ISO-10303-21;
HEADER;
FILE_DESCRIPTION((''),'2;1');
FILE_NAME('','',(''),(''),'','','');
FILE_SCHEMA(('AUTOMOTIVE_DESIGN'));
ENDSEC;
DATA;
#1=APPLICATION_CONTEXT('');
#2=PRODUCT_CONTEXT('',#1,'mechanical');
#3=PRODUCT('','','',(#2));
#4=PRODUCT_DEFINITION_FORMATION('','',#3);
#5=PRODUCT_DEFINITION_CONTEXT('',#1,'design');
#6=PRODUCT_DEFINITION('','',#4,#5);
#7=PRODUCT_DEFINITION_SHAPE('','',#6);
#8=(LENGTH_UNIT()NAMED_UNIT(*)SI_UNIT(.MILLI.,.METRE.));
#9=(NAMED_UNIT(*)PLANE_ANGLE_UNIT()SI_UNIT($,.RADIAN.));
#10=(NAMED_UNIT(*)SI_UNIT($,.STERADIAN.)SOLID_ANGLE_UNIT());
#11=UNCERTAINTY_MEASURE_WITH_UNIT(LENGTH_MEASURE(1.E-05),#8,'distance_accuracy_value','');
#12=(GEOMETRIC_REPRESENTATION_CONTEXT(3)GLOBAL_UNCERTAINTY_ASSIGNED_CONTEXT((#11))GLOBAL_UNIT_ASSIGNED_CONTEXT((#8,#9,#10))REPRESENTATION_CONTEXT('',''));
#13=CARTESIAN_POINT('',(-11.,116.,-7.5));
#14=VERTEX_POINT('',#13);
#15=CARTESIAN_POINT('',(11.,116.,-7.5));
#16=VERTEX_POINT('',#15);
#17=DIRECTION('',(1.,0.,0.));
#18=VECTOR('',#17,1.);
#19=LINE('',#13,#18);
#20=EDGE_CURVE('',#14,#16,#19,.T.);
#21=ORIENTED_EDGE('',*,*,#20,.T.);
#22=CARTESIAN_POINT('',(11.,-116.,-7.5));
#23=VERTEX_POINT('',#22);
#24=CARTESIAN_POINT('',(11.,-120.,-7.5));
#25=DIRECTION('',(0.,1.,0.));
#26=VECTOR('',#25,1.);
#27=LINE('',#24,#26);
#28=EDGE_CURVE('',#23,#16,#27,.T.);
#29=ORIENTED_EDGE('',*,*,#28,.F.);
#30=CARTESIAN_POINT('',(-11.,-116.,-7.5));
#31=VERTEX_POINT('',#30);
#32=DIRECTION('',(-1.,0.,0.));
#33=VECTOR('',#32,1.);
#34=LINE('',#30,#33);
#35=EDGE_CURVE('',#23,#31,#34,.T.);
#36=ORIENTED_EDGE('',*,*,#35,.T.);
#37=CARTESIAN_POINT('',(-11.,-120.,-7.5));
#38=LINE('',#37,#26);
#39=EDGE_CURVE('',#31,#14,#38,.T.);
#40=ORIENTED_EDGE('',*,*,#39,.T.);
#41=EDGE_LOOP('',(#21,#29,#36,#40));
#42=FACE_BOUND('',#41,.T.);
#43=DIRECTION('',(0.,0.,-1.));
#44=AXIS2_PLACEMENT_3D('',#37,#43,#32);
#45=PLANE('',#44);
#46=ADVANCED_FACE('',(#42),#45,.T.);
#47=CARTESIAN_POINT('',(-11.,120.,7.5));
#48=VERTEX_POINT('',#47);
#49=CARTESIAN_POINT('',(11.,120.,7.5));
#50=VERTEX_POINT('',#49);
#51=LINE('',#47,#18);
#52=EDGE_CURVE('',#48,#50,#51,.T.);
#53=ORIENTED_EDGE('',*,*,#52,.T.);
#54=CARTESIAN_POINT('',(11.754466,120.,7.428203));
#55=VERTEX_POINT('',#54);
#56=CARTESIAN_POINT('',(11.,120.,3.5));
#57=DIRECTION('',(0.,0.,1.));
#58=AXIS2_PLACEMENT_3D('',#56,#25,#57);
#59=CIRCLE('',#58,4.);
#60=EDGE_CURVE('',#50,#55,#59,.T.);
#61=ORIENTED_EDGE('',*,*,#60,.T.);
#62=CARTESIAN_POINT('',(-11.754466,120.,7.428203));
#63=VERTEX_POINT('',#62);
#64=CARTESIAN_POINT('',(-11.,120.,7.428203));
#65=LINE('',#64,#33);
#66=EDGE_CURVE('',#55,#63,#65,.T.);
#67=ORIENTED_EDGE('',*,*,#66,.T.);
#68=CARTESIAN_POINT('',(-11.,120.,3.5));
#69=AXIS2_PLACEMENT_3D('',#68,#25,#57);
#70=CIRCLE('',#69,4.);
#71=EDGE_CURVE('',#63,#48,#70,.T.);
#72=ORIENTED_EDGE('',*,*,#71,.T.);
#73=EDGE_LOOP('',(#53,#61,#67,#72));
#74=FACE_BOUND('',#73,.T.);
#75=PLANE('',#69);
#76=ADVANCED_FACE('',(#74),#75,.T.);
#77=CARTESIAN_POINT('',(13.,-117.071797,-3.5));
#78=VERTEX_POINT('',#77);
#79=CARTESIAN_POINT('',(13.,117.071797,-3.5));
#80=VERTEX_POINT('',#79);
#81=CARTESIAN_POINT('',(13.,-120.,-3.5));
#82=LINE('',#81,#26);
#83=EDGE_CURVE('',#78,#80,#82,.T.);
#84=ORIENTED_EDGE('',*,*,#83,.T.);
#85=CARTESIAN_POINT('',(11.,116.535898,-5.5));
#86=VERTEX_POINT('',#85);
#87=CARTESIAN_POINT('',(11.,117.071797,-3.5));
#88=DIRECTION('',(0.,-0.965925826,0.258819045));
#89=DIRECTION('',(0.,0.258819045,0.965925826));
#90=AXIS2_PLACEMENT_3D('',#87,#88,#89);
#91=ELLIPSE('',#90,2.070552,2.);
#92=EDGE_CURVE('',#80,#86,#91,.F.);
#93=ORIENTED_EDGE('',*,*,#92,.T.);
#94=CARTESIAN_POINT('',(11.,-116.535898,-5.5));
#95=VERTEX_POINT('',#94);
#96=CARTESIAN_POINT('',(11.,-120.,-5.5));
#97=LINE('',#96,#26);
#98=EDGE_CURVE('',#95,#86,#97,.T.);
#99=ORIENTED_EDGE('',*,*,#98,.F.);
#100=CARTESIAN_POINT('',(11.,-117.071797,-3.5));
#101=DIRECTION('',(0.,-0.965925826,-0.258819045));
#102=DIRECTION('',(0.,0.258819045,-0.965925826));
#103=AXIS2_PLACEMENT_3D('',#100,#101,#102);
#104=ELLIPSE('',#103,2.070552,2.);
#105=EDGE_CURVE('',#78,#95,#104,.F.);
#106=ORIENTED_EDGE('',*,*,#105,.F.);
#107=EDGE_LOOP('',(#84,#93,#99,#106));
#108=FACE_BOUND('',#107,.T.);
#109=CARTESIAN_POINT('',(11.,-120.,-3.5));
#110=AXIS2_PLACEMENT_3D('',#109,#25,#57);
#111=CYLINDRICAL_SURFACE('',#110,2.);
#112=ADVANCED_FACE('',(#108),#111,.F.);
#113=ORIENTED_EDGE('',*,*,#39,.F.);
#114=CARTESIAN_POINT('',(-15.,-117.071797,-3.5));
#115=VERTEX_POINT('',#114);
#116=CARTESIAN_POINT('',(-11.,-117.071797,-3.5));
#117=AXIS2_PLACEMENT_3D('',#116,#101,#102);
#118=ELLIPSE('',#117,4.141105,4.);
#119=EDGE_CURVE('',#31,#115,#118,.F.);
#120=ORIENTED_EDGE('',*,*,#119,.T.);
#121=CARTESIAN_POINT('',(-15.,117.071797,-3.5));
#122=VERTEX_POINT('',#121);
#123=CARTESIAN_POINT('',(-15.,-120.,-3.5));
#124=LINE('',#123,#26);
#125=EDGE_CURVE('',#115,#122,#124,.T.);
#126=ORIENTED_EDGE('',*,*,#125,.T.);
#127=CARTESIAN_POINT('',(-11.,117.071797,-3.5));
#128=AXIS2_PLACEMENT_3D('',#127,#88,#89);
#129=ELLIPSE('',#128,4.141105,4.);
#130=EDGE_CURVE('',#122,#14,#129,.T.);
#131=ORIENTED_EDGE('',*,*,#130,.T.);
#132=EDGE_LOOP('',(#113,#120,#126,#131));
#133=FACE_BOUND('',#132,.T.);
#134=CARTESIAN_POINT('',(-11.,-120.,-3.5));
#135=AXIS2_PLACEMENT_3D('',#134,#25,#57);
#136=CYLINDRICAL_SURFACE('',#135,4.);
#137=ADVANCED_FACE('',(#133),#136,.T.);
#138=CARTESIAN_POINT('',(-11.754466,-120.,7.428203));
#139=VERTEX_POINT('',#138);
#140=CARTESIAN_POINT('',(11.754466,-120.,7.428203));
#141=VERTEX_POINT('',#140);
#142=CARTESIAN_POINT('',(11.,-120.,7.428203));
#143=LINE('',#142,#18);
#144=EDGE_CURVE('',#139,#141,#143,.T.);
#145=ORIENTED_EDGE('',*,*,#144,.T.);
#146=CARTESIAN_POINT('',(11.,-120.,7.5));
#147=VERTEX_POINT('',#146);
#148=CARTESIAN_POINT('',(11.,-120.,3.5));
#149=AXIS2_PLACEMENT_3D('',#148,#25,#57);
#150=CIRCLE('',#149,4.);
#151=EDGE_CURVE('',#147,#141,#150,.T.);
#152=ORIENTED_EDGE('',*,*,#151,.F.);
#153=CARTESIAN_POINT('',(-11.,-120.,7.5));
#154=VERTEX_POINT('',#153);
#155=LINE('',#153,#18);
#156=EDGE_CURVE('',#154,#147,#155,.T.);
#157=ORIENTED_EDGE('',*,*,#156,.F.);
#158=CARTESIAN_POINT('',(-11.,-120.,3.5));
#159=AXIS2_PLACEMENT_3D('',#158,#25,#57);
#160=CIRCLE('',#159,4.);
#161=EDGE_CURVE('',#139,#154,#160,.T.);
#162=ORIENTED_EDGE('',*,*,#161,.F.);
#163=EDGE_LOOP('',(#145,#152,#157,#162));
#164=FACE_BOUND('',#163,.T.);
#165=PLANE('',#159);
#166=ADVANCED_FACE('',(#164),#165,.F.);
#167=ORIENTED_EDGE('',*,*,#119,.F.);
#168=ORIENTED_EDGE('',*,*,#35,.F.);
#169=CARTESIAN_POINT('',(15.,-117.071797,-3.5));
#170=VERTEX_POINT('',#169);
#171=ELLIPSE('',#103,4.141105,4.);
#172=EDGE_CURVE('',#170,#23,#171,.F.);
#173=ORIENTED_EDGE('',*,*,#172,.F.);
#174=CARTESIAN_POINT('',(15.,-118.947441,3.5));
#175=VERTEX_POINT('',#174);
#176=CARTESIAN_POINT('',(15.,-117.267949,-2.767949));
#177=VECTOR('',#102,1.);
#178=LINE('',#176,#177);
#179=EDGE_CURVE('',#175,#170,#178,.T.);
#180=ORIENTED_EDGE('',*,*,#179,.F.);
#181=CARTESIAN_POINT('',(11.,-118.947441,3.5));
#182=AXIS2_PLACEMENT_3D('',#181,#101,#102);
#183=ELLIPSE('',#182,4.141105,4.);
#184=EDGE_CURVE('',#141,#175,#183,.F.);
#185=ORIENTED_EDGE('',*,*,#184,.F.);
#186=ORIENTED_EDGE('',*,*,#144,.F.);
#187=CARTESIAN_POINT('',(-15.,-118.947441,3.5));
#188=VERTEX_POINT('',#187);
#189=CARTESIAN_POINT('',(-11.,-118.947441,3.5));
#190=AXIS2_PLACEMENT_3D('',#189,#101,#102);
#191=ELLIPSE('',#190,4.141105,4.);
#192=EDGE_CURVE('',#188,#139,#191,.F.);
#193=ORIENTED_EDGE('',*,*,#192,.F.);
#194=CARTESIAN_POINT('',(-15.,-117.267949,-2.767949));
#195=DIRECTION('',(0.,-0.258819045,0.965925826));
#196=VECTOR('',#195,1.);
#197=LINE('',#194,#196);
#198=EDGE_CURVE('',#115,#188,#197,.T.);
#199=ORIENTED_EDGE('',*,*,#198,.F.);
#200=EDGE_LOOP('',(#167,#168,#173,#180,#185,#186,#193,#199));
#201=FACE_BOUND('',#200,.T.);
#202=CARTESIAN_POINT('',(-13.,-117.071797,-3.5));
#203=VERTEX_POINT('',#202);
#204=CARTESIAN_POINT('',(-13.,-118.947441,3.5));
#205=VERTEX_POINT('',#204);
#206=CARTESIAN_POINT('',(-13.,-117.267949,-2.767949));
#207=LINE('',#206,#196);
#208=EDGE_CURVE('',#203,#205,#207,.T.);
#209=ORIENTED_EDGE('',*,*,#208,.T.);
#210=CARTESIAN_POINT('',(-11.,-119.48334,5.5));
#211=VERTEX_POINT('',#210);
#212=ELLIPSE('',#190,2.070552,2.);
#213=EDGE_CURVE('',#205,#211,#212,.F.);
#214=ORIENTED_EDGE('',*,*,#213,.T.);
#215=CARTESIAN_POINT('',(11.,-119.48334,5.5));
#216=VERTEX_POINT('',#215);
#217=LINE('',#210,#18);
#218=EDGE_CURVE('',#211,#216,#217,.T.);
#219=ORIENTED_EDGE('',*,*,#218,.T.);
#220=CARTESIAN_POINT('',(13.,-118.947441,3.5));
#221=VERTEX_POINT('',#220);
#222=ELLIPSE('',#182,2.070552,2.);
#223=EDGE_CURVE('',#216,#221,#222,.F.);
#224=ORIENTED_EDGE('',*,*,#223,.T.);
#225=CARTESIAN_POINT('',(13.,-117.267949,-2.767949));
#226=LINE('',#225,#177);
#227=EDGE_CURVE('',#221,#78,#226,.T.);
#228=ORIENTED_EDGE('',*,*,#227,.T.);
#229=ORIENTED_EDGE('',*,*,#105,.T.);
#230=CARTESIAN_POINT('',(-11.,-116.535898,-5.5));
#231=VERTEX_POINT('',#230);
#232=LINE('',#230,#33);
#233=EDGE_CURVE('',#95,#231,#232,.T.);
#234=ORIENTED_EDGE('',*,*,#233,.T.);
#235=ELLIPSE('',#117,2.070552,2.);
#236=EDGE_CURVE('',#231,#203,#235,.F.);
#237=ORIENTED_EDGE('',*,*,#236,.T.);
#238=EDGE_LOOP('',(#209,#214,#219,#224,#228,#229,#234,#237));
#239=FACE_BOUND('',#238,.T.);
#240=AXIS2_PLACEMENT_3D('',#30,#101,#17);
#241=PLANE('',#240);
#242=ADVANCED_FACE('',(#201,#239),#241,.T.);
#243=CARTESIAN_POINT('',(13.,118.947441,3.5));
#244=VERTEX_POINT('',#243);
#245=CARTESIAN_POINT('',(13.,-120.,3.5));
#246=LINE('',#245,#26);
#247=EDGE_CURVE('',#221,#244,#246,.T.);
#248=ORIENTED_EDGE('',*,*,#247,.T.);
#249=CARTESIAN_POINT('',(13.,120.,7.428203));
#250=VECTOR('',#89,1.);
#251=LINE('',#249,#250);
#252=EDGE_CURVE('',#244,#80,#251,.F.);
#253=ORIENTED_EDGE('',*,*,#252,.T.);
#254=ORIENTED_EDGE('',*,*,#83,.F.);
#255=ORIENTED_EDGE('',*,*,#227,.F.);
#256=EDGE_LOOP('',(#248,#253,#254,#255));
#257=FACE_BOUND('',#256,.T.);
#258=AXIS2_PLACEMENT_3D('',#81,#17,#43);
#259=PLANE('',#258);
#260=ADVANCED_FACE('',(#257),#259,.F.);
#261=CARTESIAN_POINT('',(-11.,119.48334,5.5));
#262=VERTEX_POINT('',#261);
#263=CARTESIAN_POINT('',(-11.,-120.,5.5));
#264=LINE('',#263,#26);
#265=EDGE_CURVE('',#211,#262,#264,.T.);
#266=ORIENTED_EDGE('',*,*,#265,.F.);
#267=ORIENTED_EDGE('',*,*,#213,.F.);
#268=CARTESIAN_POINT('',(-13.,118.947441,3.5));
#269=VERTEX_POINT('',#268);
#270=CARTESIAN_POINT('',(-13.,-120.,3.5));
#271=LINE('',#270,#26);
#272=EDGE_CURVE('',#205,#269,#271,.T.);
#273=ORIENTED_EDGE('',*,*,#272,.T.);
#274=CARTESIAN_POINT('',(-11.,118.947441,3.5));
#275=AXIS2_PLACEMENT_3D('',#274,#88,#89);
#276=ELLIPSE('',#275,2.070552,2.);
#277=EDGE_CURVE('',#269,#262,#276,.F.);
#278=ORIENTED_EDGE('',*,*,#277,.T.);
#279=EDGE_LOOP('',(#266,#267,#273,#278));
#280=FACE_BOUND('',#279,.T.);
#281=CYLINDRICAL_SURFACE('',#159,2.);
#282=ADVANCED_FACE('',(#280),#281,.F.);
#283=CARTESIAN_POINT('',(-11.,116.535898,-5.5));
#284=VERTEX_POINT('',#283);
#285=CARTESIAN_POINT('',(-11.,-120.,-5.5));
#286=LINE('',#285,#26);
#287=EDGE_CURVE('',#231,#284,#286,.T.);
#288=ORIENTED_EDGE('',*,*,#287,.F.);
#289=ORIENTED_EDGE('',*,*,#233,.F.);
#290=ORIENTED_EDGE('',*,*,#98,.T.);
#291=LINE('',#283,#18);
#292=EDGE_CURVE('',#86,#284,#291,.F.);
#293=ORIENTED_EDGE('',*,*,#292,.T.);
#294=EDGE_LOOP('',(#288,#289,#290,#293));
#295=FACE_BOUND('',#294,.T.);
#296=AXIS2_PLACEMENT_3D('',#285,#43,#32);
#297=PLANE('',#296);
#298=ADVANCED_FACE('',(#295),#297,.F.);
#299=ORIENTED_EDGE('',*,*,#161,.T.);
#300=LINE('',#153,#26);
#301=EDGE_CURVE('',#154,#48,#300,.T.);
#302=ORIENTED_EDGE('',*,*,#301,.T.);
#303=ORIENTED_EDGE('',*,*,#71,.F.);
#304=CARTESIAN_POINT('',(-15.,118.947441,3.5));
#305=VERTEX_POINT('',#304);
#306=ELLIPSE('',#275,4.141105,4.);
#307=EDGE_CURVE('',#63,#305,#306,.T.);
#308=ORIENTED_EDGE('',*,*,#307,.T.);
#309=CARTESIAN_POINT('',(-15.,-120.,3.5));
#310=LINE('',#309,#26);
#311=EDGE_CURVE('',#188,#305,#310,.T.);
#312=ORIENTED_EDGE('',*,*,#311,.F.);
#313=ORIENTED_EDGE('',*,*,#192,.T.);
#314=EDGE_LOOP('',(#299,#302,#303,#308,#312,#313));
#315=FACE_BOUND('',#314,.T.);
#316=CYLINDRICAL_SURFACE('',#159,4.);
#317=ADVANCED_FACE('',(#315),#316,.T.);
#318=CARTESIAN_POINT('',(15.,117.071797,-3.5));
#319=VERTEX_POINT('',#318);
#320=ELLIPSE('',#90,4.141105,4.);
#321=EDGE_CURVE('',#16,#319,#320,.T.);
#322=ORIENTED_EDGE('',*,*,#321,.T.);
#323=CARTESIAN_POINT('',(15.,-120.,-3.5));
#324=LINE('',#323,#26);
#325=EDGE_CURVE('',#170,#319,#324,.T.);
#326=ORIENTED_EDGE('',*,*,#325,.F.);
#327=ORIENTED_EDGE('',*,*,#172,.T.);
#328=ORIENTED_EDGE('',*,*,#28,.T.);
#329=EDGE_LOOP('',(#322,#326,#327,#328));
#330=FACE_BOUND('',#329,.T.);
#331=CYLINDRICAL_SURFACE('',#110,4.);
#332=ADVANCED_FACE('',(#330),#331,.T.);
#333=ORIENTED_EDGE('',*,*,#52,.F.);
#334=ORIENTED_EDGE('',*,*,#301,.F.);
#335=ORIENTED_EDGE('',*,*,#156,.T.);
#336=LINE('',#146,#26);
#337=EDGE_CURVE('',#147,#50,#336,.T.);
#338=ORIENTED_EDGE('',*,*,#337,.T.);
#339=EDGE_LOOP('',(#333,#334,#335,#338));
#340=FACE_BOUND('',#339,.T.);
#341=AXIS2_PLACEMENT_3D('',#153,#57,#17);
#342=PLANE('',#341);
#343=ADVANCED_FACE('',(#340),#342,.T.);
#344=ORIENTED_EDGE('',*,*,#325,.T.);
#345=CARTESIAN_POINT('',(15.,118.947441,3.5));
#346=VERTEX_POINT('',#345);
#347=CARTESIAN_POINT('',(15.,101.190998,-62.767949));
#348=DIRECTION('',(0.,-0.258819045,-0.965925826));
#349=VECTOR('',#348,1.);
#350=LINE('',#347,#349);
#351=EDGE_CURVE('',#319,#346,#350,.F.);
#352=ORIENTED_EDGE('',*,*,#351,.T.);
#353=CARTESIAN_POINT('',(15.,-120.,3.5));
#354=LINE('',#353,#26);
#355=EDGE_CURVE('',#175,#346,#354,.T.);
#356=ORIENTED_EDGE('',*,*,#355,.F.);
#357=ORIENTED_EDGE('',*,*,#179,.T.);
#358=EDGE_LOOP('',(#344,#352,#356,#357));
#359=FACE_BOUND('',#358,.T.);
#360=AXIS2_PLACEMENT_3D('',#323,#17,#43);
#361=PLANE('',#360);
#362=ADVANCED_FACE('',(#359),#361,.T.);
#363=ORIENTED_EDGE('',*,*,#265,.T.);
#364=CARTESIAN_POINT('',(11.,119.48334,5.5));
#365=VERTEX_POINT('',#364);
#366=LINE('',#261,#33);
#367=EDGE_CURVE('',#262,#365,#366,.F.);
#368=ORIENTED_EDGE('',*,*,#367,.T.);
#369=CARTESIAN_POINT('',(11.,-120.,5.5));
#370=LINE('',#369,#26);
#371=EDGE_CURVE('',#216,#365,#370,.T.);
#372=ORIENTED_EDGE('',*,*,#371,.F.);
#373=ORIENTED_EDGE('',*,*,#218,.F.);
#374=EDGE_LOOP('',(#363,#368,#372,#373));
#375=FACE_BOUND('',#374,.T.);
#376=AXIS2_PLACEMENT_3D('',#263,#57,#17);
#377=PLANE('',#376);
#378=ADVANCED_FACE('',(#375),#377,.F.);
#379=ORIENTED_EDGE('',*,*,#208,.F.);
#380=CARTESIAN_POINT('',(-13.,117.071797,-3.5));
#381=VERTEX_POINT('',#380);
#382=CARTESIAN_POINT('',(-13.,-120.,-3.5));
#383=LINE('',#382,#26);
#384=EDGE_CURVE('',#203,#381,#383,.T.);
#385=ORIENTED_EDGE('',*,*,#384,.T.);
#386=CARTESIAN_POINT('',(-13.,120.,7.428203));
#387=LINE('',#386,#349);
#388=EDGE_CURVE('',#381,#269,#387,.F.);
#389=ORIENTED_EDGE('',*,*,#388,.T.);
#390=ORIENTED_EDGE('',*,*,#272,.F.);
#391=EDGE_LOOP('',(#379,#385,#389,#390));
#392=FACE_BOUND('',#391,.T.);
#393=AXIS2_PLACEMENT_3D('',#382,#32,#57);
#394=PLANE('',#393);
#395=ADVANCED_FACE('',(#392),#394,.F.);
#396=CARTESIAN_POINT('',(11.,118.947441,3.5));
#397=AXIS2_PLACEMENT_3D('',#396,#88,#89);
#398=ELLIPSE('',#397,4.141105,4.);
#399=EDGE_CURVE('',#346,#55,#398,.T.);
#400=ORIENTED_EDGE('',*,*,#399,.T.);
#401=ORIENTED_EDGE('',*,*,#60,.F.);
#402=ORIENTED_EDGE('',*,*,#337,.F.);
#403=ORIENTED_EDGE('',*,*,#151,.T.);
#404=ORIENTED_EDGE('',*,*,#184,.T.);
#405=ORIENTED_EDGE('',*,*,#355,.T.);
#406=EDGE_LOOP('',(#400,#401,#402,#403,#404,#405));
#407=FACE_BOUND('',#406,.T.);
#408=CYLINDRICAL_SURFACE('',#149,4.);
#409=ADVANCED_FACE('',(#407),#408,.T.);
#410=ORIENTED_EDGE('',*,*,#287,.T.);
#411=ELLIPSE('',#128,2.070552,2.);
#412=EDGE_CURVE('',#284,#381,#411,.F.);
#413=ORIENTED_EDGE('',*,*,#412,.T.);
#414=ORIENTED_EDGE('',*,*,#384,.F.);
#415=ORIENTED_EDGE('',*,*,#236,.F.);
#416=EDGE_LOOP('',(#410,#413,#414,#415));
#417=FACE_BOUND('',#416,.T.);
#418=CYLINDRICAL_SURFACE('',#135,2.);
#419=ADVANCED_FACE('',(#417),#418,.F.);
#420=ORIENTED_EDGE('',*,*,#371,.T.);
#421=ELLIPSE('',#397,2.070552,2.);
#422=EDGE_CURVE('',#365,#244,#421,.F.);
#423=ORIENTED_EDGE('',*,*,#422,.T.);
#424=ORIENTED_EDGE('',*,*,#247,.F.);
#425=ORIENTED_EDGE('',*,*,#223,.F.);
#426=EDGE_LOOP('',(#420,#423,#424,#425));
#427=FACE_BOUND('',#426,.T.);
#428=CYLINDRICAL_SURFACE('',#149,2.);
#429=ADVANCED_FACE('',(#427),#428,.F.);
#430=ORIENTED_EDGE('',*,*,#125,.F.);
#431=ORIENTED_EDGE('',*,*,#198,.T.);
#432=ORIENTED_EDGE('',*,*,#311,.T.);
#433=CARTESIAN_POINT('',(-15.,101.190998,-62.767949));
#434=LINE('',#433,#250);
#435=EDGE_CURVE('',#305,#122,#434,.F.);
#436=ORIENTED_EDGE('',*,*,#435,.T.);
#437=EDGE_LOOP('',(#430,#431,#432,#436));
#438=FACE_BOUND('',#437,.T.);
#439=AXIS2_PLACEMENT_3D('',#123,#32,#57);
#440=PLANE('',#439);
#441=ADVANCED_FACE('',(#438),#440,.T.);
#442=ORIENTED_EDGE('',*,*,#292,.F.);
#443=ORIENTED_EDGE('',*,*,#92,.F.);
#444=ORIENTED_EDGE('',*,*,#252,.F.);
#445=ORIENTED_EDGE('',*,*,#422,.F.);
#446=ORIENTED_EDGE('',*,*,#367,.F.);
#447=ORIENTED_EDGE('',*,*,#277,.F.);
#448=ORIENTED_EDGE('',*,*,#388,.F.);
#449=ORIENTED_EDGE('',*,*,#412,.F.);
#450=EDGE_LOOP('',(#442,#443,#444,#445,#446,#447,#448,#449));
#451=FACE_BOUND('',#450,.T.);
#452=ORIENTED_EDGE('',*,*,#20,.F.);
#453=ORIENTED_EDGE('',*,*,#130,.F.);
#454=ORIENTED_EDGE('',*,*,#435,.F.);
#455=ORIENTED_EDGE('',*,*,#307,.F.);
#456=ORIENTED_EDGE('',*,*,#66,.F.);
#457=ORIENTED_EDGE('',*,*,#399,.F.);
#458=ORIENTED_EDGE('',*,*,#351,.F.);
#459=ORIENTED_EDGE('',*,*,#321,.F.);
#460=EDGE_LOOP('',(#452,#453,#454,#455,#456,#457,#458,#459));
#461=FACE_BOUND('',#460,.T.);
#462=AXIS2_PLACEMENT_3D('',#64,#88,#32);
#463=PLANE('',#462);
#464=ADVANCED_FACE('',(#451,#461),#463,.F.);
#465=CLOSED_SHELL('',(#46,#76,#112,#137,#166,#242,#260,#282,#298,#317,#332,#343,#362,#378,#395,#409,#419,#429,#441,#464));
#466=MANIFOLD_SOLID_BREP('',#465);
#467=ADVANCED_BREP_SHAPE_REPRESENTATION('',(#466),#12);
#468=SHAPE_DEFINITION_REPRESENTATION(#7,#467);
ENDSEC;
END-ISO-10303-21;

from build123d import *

# Parameters (mm, degrees)
EXTRUDE_1_DEPTH      = 120
EXTRUDE_1_DEPTH_BACK = 120
CHAMFER_1_SIZE       = 4
CHAMFER_1_SIZE_2     = 14.92820323


with BuildPart() as part:
    # Эскиз1 → Вытянуть-Тонкостенный1 (new, two sides: drawn at the far end of the back side and taken through both)
    with BuildSketch(Plane(origin=(0, 0, 0), x_dir=(1, 0, 0), z_dir=(0, 1, 0)).offset(-EXTRUDE_1_DEPTH_BACK)):
        with BuildLine():
            Line((-11, 7.5), (11, 7.5))
            ThreePointArc((11, 7.5), (13.828427125, 6.328427125), (15, 3.5))
            Line((15, 3.5), (15, -3.5))
            ThreePointArc((15, -3.5), (13.828427125, -6.328427125), (11, -7.5))
            Line((11, -7.5), (-11, -7.5))
            ThreePointArc((-11, -7.5), (-13.828427125, -6.328427125), (-15, -3.5))
            Line((-15, -3.5), (-15, 3.5))
            ThreePointArc((-15, 3.5), (-13.828427125, 6.328427125), (-11, 7.5))
        make_face()
        with BuildLine():
            Line((-11, 5.5), (11, 5.5))
            ThreePointArc((11, 5.5), (12.414213562, 4.914213562), (13, 3.5))
            Line((13, 3.5), (13, -3.5))
            ThreePointArc((13, -3.5), (12.414213562, -4.914213562), (11, -5.5))
            Line((11, -5.5), (-11, -5.5))
            ThreePointArc((-11, -5.5), (-12.414213562, -4.914213562), (-13, -3.5))
            Line((-13, -3.5), (-13, 3.5))
            ThreePointArc((-13, 3.5), (-12.414213562, 4.914213562), (-11, 5.5))
        make_face(mode=Mode.SUBTRACT)
    extrude(amount=EXTRUDE_1_DEPTH + EXTRUDE_1_DEPTH_BACK)

    # Фаска1
    # the kernel refuses this chamfer: 14.92820323, 4 mm, written as the material it takes off along each edge
    with BuildSketch(Plane(origin=(-49.764387332, 120, -7.5), x_dir=(0, -0.990500038825954, -0.1375124470212912), z_dir=(1, 0, 0))) as chamfer_1_piece_1:
        Polygon((CHAMFER_1_SIZE * 0.990500038826, -CHAMFER_1_SIZE * 0.137512447021), (-CHAMFER_1_SIZE_2 * 0.137512447024, -CHAMFER_1_SIZE_2 * 0.990500038844), (0, 0), align=None)
    extrude(amount=99.528774665, mode=Mode.SUBTRACT)
    with BuildSketch(Plane(origin=(-49.764387332, -120, -7.5), x_dir=(0, -0.009967146577155871, 0.9999503267608394), z_dir=(1, 0, 0))) as chamfer_1_piece_2:
        Polygon((CHAMFER_1_SIZE_2 * 0.999950326779, -CHAMFER_1_SIZE_2 * 0.00996714657734), (-CHAMFER_1_SIZE * 0.00996714657716, -CHAMFER_1_SIZE * 0.999950326761), (0, 0), align=None)
    extrude(amount=99.528774665, mode=Mode.SUBTRACT)


solid = part.part
